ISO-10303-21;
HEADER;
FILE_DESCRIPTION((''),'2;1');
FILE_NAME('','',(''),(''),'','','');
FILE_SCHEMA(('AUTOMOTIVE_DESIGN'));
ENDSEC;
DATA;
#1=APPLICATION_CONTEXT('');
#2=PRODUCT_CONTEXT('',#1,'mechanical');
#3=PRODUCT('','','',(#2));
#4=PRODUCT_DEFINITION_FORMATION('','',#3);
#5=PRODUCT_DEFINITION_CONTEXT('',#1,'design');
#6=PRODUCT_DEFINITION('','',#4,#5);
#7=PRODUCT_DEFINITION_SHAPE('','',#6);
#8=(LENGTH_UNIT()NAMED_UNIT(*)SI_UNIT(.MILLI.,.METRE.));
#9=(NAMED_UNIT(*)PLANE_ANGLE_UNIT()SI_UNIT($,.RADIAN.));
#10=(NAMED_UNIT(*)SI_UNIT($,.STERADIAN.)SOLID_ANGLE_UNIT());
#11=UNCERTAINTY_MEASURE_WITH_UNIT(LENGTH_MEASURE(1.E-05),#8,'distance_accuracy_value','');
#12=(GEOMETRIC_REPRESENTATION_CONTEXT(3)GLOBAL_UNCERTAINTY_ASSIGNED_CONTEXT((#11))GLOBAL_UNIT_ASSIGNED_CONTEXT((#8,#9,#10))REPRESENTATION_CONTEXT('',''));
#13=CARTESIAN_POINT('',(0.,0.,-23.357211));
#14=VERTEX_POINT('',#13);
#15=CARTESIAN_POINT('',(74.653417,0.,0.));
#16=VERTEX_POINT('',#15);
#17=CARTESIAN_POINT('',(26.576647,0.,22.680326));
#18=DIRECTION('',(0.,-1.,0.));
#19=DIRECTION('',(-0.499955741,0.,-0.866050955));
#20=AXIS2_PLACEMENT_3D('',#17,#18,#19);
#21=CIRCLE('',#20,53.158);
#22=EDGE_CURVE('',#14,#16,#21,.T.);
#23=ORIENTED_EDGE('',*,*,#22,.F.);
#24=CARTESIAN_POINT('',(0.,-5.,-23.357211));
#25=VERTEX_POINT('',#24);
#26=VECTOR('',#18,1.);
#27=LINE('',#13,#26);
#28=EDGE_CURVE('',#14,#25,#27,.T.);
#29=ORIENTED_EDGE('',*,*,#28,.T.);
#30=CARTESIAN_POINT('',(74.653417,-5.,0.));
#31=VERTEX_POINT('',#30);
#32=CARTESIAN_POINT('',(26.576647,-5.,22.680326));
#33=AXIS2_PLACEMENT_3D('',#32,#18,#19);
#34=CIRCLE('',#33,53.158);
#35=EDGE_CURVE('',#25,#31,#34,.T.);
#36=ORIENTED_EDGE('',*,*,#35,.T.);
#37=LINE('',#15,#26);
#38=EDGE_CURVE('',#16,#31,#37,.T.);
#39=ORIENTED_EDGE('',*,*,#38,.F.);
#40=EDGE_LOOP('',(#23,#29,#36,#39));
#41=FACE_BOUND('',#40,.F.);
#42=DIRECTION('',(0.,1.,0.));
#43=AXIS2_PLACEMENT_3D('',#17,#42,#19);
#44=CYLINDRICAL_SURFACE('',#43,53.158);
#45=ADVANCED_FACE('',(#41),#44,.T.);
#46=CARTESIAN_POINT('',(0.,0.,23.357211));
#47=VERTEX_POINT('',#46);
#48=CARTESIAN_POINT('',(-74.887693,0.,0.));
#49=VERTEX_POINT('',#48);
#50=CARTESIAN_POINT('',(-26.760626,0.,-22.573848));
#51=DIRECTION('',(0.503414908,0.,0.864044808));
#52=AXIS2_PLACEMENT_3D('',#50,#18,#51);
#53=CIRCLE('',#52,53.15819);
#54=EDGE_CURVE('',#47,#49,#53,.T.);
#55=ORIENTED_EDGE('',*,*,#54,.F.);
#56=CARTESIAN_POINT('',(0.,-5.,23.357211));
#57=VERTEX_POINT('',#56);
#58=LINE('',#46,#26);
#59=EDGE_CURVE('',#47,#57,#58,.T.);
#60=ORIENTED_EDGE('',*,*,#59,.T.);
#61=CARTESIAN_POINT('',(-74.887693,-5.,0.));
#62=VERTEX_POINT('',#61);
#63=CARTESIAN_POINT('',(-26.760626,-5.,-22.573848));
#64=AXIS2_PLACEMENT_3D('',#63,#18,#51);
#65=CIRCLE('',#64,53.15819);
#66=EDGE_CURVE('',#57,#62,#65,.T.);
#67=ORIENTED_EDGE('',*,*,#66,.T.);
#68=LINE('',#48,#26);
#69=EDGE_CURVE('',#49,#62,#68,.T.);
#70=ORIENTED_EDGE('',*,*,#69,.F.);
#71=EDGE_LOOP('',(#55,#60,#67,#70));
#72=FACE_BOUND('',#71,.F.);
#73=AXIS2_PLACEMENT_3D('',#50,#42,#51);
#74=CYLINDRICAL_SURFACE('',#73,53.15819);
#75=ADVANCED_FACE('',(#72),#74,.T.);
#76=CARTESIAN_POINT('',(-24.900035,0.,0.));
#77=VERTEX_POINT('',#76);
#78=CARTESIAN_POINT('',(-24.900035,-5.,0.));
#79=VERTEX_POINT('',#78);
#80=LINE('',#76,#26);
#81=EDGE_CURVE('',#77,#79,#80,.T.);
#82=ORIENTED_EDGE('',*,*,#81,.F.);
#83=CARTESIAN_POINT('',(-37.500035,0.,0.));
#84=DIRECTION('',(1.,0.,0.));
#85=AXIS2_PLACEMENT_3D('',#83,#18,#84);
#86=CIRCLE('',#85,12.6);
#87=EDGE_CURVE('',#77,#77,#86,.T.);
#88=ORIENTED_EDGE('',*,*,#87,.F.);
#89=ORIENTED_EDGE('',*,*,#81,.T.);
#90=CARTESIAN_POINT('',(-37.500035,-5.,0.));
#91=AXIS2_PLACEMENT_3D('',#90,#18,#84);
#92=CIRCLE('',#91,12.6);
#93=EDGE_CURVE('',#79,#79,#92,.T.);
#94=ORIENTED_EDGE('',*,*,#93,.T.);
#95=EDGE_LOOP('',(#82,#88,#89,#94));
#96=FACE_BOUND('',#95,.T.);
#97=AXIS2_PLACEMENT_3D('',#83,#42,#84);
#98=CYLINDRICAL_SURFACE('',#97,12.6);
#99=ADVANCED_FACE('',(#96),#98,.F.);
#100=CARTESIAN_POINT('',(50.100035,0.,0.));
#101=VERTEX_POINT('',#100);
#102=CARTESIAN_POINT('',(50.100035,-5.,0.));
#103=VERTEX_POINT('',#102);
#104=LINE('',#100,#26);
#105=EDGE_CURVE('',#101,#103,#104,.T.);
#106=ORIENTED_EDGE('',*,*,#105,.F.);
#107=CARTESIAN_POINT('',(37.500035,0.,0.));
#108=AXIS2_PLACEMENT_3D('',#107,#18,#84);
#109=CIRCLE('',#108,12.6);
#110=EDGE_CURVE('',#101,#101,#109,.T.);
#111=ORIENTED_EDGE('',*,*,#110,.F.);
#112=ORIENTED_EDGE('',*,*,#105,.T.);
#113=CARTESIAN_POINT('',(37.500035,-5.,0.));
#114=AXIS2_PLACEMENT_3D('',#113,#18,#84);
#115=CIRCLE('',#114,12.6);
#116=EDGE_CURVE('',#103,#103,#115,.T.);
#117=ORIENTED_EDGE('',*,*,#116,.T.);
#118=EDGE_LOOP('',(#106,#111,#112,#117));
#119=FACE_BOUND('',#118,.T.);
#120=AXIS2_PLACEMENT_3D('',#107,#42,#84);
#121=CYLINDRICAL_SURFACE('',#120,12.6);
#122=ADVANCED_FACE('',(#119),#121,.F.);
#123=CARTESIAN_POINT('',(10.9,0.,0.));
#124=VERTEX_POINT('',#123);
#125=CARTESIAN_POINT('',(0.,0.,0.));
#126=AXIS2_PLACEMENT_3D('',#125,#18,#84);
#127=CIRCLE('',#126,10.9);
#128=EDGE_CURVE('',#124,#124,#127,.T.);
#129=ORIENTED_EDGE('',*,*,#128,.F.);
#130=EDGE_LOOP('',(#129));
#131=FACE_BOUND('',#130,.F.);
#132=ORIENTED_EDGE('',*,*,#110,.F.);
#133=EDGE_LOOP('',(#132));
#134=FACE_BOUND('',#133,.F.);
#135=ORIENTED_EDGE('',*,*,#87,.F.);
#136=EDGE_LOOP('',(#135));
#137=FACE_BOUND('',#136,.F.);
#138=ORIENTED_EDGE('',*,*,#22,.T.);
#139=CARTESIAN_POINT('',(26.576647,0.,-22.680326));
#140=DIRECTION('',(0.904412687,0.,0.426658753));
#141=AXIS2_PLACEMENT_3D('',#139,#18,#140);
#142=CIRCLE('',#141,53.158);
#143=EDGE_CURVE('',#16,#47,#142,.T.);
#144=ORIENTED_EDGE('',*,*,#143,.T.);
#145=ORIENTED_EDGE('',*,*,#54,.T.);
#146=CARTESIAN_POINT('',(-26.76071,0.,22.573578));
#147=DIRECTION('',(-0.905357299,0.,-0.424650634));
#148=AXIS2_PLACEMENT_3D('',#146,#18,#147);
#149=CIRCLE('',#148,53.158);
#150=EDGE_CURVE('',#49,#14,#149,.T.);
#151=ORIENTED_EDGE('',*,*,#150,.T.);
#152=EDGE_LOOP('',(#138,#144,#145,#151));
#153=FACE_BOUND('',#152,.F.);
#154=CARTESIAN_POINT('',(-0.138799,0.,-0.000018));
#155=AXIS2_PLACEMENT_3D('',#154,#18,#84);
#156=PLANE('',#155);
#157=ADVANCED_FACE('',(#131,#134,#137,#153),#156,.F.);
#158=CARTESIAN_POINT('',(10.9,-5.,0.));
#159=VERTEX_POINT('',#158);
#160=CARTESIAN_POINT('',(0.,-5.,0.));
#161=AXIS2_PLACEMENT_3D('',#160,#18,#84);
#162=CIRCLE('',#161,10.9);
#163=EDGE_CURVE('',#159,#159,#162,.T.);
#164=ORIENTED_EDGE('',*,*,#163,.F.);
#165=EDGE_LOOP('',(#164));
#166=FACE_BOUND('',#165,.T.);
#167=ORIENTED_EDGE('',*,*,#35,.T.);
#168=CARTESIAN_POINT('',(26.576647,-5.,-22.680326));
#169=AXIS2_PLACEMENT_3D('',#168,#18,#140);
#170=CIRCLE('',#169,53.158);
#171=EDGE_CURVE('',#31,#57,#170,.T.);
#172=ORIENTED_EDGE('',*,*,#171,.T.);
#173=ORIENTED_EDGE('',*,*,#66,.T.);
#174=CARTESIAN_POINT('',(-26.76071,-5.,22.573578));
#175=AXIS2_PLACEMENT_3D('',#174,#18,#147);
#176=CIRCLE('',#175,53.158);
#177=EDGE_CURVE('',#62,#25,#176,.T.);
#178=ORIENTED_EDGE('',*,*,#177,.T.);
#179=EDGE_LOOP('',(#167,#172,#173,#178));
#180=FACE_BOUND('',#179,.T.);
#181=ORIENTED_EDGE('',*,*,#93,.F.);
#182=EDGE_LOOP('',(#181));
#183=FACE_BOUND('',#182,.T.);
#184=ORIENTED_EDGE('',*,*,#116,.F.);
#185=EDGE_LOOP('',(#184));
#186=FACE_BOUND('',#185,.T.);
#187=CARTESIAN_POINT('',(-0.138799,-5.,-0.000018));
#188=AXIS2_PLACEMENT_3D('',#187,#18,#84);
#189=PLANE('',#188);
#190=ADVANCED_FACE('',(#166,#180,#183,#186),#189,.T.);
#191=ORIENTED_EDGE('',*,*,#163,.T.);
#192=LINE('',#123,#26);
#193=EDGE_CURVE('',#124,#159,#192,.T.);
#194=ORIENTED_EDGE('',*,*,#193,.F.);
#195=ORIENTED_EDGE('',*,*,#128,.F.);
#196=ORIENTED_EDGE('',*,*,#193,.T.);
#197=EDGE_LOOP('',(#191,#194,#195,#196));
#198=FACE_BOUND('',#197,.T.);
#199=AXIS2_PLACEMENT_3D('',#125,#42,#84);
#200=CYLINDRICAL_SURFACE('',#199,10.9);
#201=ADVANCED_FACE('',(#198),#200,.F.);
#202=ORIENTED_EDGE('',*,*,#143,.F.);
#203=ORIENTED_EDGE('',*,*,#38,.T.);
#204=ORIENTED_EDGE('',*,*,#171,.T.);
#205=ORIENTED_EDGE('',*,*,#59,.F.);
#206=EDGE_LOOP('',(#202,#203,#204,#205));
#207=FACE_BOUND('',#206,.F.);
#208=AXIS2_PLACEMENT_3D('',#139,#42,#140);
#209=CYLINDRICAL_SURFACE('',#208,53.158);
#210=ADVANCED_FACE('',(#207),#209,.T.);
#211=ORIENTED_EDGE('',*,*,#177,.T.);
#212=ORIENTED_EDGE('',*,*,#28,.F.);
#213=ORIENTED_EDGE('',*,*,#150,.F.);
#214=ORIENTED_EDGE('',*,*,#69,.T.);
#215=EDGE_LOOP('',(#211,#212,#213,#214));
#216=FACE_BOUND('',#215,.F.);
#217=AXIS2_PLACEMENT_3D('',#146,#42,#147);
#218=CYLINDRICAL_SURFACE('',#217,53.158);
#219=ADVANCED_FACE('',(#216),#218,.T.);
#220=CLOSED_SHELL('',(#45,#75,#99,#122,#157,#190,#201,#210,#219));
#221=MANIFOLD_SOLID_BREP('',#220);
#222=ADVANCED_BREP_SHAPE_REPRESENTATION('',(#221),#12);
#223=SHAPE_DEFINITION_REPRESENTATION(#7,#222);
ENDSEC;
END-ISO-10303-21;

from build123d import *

# Parameters (mm, degrees)
F0_R     = 12.6
F0_R_2   = 10.9
F1_DEPTH = 5


# Not quite as in the source:
# - a feature names something its author has since deleted; it is built from what else it names


with BuildPart() as f1:
    # F0 (on Front) → F1 (new body)
    with BuildSketch(Plane.XZ):
        with BuildLine():
            ThreePointArc((74.653416872, 0), (42.4496947935, 28.0524969579), (0, 23.3572106808))
            ThreePointArc((0, 23.3572106808), (-42.5884817576, 28.1732918571), (-74.8876929283, 0))
            ThreePointArc((-74.8876929283, 0), (-42.5885090722, -28.1733794331), (0, -23.3572106808))
            ThreePointArc((0, -23.3572106808), (42.4496947935, -28.0524969579), (74.653416872, 0))
        make_face()
        with Locations((-37.5000350177, 0)):
            Circle(F0_R, mode=Mode.SUBTRACT)
        Circle(F0_R_2, mode=Mode.SUBTRACT)
        with Locations((37.5000350177, 0)):
            Circle(F0_R, mode=Mode.SUBTRACT)
    extrude(amount=F1_DEPTH)


solid = f1.part
